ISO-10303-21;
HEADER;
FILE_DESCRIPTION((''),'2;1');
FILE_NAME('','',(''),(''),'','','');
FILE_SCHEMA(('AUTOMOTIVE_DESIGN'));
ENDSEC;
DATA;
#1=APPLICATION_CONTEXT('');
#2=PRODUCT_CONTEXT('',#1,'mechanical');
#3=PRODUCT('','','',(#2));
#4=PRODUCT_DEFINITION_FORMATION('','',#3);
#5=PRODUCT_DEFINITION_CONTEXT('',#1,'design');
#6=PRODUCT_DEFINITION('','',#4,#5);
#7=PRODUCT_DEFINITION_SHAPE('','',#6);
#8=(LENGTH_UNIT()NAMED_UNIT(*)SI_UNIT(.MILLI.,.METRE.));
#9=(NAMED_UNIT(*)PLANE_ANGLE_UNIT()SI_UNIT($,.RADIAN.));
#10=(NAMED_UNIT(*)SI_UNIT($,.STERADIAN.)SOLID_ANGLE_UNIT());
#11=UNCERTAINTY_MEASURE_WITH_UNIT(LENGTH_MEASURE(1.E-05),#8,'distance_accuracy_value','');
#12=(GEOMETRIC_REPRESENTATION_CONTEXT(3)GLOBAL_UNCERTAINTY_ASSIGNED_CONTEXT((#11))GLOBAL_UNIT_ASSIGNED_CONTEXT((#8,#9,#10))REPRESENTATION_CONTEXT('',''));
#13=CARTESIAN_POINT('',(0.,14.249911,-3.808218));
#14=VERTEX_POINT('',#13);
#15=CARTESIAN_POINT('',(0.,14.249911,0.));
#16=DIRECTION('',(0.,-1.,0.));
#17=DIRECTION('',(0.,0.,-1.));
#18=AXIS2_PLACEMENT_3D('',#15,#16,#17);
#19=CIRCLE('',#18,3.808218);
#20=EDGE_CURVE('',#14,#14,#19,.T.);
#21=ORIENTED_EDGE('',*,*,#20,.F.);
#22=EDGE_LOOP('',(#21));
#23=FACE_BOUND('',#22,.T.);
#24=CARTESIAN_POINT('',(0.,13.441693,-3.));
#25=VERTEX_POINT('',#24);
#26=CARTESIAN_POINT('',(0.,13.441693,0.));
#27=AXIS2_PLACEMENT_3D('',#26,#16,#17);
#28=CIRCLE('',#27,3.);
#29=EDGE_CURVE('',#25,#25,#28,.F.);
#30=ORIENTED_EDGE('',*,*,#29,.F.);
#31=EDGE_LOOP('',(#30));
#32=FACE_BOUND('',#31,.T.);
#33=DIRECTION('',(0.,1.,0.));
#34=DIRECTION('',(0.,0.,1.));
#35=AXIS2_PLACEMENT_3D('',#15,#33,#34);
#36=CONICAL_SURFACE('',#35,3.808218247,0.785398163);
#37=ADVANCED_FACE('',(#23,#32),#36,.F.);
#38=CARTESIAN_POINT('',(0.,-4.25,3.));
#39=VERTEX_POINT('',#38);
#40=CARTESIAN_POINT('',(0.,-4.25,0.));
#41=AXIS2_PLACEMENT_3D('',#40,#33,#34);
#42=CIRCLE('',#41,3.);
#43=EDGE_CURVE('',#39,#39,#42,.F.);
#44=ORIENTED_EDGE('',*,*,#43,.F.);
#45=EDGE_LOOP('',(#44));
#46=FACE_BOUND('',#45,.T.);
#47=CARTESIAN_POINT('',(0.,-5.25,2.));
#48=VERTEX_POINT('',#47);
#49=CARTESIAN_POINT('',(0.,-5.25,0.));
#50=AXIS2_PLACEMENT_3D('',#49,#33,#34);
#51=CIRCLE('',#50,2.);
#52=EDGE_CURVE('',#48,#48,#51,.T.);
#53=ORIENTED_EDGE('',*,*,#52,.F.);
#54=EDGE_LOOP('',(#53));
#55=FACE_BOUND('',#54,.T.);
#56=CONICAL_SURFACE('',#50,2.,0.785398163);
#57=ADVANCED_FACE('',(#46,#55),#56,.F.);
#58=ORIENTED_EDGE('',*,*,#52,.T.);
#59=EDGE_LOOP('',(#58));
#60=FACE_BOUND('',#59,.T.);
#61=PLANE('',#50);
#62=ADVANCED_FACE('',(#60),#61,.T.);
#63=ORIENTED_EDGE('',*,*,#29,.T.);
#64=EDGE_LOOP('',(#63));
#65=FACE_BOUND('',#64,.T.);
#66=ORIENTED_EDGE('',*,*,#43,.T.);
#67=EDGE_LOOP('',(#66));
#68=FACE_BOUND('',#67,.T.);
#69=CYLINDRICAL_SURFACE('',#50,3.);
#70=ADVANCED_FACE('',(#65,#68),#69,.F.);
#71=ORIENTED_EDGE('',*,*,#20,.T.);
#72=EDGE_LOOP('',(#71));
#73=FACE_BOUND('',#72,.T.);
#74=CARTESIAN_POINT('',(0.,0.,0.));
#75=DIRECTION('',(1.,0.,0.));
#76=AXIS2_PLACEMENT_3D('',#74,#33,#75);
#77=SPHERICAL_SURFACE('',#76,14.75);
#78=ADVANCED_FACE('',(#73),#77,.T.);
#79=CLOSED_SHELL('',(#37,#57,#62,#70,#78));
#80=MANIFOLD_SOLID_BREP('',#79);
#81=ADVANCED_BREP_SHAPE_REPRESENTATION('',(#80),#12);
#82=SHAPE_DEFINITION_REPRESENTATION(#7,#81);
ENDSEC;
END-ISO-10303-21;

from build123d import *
from build123d.topology import SkipClean

# Parameters (mm, degrees)
IZIM2_R               = 3
KES_EKSTR_ZYON1_DEPTH = 20
PAH1_SIZE             = 1
PAH2_SIZE             = 1


with BuildPart() as part:
    # Çizim1 → Döndür2 (revolve)
    with SkipClean():  # the faces are left unmerged after this step: merging them gives an invalid solid
        with BuildSketch(Plane.XY):
            with BuildLine():
                ThreePointArc((14.75, 0), (10.429825023, 10.429825023), (0, 14.75))
                Line((0, 14.75), (0, -14.75))
                ThreePointArc((0, -14.75), (10.429825023, -10.429825023), (14.75, 0))
            make_face()
            with BuildLine():
                Line((0, -14.75), (0, 14.75))
                ThreePointArc((0, 14.75), (-14.75, 0), (0, -14.75))
            make_face()
        revolve(axis=Axis((0, 19.521191609, 0), (0, -1, 0)))

    # Çizim2 → Kes-Ekstrüzyon1 (cut)
    with BuildSketch(Plane(origin=(0, 14.75, 0), x_dir=(1, 0, 0), z_dir=(0, 1, 0))):
        with Locations(Location((0, 0, 0), (0, 0, 270))):
            Circle(IZIM2_R)
    extrude(amount=-KES_EKSTR_ZYON1_DEPTH, mode=Mode.SUBTRACT)

    # Pah1
    # the kernel refuses this chamfer: 1, 0.845674781 mm, written as the material it takes off along each edge
    with BuildSketch(Plane(origin=(0, 14.441693114, 0), x_dir=(0, 0, 1), z_dir=(1, 0, 0))) as pah1_piece_1:
        with BuildLine():
            Line((3.808218247, 0.191781753), (3, PAH1_SIZE))
            Line((3, PAH1_SIZE), (3, 0))
            ThreePointArc((3, 0), (3.415662232, 0.092625147), (3.808218247, 0.191781753))
        make_face()
    revolve(axis=Axis((0, 14.441693114, 0), (0, -1, 0)), revolution_arc=270, mode=Mode.SUBTRACT)
    with BuildSketch(Plane(origin=(0, 14.441693114, 0), x_dir=(0, 0, 1), z_dir=(-1, 0, 0))) as pah1_piece_2:
        with BuildLine():
            Line((3.808218247, -0.191781753), (3, -PAH1_SIZE))
            Line((3, -PAH1_SIZE), (3, 0))
            ThreePointArc((3, 0), (3.415662232, -0.092625147), (3.808218247, -0.191781753))
        make_face()
    revolve(axis=Axis((0, 14.441693114, 0), (0, 1, 0)), revolution_arc=90, mode=Mode.SUBTRACT)

    # Pah2
    pah2_edges = [part.edges().sort_by_distance(p)[0] for p in [
        (0, -5.25, -3),
    ]]
    chamfer(pah2_edges, length=PAH2_SIZE)


solid = part.part
